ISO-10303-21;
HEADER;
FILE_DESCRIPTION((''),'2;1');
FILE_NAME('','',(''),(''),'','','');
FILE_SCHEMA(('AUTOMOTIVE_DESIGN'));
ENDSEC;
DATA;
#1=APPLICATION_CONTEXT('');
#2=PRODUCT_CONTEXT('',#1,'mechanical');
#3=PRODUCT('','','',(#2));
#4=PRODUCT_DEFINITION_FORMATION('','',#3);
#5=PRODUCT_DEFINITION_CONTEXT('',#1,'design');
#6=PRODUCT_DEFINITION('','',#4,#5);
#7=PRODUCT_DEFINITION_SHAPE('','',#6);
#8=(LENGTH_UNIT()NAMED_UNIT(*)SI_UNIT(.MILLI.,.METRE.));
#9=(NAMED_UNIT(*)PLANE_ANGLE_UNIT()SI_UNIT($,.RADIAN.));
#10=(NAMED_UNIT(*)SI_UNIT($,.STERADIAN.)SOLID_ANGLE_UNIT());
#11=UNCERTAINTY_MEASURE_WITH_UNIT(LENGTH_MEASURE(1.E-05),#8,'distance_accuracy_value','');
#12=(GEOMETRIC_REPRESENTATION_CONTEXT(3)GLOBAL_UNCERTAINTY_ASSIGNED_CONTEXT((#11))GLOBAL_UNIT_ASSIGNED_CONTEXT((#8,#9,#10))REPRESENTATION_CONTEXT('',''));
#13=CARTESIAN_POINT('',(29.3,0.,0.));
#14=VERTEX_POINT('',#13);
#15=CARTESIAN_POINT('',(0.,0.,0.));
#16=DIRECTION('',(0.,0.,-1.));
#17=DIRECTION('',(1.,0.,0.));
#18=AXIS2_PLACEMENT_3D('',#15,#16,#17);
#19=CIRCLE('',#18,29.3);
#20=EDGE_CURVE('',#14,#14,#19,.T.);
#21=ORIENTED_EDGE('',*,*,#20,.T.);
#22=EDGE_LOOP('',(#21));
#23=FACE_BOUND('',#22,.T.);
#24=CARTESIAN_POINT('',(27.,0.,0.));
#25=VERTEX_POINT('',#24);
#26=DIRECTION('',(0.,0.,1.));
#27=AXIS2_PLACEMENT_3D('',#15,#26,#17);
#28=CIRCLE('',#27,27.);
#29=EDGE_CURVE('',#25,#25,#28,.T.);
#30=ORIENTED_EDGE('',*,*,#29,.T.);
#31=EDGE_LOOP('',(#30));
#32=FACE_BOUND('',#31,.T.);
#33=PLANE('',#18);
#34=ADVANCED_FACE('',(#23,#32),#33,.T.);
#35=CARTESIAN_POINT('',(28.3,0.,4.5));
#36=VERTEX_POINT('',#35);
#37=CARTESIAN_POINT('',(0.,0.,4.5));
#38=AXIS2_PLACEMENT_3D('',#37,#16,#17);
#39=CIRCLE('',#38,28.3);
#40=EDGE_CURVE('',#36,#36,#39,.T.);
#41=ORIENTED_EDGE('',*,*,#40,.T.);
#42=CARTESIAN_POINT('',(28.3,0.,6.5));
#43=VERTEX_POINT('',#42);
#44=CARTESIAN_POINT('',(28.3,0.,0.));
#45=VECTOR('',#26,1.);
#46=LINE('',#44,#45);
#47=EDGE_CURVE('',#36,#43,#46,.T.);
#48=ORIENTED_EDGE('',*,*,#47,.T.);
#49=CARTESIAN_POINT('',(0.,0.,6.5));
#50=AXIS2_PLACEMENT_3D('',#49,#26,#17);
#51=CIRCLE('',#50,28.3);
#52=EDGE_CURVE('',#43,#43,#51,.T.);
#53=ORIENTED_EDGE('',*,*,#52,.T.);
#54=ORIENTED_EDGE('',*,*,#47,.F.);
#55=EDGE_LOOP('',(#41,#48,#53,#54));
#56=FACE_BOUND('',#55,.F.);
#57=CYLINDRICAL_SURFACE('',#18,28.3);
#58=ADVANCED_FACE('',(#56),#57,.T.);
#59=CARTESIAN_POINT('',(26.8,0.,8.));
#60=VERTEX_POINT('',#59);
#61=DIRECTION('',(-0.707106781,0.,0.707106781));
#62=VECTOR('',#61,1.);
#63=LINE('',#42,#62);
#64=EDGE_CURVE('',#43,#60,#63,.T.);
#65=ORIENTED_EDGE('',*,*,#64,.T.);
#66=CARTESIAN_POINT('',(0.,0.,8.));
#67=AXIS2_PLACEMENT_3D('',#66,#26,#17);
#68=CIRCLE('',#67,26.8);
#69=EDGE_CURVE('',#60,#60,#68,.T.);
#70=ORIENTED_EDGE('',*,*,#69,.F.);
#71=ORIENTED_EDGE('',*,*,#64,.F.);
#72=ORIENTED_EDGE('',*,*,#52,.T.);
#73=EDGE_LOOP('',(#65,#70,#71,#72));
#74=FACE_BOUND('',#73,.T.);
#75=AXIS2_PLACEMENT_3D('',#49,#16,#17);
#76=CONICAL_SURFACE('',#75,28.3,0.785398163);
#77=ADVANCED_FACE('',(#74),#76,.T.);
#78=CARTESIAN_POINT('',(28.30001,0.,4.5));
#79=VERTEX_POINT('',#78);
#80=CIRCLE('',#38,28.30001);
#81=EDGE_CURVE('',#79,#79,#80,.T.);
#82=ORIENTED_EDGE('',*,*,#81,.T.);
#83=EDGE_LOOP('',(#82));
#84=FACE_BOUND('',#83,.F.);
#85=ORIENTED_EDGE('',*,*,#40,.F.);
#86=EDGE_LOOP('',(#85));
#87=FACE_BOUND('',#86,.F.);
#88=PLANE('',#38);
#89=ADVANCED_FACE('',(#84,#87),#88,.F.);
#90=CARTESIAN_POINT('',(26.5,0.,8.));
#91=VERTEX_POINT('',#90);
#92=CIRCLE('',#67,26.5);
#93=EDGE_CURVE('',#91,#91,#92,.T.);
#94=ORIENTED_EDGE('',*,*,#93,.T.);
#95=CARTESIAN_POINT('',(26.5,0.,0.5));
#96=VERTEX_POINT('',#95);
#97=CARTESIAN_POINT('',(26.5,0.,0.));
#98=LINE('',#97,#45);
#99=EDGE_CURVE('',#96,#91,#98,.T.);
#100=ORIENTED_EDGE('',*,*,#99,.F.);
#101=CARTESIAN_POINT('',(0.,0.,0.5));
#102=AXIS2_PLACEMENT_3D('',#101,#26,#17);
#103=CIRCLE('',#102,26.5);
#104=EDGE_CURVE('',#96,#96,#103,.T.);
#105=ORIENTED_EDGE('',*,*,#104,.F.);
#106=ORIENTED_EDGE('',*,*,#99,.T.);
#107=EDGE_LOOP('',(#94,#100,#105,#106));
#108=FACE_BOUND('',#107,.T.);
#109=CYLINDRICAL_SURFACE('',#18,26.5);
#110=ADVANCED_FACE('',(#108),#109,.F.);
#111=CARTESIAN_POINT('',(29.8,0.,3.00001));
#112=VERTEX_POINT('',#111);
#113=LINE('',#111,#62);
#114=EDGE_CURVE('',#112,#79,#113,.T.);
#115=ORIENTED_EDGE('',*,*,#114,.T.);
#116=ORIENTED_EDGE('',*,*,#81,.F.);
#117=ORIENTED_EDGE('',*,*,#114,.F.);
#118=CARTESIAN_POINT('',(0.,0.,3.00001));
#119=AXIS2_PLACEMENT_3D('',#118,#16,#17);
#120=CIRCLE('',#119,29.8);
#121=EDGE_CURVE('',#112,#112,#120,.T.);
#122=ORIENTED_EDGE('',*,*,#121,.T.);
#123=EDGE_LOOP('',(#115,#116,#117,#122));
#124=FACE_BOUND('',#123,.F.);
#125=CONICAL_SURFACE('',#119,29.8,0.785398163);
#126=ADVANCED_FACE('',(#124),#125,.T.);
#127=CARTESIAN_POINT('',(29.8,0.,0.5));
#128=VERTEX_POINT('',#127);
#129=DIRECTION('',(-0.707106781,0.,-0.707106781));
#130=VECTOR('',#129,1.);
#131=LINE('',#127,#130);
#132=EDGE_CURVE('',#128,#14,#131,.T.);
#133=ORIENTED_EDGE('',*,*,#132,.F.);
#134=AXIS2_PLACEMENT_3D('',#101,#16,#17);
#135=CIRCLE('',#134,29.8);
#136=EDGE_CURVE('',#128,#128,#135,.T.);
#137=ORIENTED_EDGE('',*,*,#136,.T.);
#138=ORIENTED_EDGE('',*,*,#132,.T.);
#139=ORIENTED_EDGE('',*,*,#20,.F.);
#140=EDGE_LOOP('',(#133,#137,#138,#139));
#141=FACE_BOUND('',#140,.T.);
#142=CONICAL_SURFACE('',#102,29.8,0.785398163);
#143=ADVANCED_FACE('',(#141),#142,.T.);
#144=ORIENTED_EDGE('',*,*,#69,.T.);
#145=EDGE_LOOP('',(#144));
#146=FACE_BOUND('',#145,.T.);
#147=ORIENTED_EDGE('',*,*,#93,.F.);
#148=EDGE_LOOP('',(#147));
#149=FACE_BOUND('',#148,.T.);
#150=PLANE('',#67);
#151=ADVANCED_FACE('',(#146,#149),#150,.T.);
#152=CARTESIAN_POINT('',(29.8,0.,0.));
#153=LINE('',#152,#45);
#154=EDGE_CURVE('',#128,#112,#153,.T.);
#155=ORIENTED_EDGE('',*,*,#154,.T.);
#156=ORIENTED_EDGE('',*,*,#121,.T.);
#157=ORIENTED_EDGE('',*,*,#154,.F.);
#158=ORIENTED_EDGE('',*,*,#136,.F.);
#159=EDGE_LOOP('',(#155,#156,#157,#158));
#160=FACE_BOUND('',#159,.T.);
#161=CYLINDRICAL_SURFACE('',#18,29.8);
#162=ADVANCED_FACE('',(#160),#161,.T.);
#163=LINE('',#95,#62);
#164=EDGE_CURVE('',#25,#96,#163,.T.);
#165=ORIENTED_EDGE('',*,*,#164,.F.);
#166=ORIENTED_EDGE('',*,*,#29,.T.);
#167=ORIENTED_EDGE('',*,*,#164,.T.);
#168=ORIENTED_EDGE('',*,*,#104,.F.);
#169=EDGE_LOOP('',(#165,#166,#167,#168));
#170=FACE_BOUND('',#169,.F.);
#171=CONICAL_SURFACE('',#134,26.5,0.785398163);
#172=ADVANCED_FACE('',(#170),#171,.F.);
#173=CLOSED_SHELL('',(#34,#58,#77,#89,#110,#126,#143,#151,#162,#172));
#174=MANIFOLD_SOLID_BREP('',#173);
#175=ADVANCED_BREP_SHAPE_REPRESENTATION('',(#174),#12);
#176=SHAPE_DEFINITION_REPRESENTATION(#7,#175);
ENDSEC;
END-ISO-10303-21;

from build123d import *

# Parameters (mm, degrees)
F0_R     = 28.3
F0_R_2   = 26.5
F1_DEPTH = 8
F2_SIZE  = 1.5
F3_SIZE  = 0.5
F4_R     = 29.8
F4_R_2   = 28.3
F5_DEPTH = 4.5
F6_SIZE  = 1.49999
F7_SIZE  = 0.5


# Not quite as in the source:
# - a fillet or chamfer is up to 0.001 mm smaller than in the source, because OpenCascade refuses the exact size


with BuildPart() as f1:
    # F0 (on Top) → F1 (new body)
    with BuildSketch(Plane.XY):
        Circle(F0_R)
        Circle(F0_R_2, mode=Mode.SUBTRACT)
    extrude(amount=F1_DEPTH)

    # F2
    f2_edges = [f1.edges().sort_by_distance(p)[0] for p in [
        (-28.3, 0, 8),
    ]]
    chamfer(f2_edges, length=F2_SIZE)

    # F3
    f3_edges = [f1.edges().sort_by_distance(p)[0] for p in [
        (-26.5, 0, 0),
    ]]
    chamfer(f3_edges, length=F3_SIZE)

    # F4 (on face) → F5 (join)
    with BuildSketch(Plane(origin=(0, 0, 0), x_dir=(1, 0, 0), z_dir=(0, 0, -1))):
        Circle(F4_R)
        Circle(F4_R_2, mode=Mode.SUBTRACT)
    extrude(amount=-F5_DEPTH)

    # F6 (size 1.5 in the source; OpenCascade refuses exactly that, so slightly less here)
    f6_edges = [f1.edges().sort_by_distance(p)[0] for p in [
        (-29.8, 0, 4.5),
    ]]
    chamfer(f6_edges, length=F6_SIZE)

    # F7
    f7_edges = [f1.edges().sort_by_distance(p)[0] for p in [
        (-29.8, 0, 0),
    ]]
    chamfer(f7_edges, length=F7_SIZE)


solid = f1.part
